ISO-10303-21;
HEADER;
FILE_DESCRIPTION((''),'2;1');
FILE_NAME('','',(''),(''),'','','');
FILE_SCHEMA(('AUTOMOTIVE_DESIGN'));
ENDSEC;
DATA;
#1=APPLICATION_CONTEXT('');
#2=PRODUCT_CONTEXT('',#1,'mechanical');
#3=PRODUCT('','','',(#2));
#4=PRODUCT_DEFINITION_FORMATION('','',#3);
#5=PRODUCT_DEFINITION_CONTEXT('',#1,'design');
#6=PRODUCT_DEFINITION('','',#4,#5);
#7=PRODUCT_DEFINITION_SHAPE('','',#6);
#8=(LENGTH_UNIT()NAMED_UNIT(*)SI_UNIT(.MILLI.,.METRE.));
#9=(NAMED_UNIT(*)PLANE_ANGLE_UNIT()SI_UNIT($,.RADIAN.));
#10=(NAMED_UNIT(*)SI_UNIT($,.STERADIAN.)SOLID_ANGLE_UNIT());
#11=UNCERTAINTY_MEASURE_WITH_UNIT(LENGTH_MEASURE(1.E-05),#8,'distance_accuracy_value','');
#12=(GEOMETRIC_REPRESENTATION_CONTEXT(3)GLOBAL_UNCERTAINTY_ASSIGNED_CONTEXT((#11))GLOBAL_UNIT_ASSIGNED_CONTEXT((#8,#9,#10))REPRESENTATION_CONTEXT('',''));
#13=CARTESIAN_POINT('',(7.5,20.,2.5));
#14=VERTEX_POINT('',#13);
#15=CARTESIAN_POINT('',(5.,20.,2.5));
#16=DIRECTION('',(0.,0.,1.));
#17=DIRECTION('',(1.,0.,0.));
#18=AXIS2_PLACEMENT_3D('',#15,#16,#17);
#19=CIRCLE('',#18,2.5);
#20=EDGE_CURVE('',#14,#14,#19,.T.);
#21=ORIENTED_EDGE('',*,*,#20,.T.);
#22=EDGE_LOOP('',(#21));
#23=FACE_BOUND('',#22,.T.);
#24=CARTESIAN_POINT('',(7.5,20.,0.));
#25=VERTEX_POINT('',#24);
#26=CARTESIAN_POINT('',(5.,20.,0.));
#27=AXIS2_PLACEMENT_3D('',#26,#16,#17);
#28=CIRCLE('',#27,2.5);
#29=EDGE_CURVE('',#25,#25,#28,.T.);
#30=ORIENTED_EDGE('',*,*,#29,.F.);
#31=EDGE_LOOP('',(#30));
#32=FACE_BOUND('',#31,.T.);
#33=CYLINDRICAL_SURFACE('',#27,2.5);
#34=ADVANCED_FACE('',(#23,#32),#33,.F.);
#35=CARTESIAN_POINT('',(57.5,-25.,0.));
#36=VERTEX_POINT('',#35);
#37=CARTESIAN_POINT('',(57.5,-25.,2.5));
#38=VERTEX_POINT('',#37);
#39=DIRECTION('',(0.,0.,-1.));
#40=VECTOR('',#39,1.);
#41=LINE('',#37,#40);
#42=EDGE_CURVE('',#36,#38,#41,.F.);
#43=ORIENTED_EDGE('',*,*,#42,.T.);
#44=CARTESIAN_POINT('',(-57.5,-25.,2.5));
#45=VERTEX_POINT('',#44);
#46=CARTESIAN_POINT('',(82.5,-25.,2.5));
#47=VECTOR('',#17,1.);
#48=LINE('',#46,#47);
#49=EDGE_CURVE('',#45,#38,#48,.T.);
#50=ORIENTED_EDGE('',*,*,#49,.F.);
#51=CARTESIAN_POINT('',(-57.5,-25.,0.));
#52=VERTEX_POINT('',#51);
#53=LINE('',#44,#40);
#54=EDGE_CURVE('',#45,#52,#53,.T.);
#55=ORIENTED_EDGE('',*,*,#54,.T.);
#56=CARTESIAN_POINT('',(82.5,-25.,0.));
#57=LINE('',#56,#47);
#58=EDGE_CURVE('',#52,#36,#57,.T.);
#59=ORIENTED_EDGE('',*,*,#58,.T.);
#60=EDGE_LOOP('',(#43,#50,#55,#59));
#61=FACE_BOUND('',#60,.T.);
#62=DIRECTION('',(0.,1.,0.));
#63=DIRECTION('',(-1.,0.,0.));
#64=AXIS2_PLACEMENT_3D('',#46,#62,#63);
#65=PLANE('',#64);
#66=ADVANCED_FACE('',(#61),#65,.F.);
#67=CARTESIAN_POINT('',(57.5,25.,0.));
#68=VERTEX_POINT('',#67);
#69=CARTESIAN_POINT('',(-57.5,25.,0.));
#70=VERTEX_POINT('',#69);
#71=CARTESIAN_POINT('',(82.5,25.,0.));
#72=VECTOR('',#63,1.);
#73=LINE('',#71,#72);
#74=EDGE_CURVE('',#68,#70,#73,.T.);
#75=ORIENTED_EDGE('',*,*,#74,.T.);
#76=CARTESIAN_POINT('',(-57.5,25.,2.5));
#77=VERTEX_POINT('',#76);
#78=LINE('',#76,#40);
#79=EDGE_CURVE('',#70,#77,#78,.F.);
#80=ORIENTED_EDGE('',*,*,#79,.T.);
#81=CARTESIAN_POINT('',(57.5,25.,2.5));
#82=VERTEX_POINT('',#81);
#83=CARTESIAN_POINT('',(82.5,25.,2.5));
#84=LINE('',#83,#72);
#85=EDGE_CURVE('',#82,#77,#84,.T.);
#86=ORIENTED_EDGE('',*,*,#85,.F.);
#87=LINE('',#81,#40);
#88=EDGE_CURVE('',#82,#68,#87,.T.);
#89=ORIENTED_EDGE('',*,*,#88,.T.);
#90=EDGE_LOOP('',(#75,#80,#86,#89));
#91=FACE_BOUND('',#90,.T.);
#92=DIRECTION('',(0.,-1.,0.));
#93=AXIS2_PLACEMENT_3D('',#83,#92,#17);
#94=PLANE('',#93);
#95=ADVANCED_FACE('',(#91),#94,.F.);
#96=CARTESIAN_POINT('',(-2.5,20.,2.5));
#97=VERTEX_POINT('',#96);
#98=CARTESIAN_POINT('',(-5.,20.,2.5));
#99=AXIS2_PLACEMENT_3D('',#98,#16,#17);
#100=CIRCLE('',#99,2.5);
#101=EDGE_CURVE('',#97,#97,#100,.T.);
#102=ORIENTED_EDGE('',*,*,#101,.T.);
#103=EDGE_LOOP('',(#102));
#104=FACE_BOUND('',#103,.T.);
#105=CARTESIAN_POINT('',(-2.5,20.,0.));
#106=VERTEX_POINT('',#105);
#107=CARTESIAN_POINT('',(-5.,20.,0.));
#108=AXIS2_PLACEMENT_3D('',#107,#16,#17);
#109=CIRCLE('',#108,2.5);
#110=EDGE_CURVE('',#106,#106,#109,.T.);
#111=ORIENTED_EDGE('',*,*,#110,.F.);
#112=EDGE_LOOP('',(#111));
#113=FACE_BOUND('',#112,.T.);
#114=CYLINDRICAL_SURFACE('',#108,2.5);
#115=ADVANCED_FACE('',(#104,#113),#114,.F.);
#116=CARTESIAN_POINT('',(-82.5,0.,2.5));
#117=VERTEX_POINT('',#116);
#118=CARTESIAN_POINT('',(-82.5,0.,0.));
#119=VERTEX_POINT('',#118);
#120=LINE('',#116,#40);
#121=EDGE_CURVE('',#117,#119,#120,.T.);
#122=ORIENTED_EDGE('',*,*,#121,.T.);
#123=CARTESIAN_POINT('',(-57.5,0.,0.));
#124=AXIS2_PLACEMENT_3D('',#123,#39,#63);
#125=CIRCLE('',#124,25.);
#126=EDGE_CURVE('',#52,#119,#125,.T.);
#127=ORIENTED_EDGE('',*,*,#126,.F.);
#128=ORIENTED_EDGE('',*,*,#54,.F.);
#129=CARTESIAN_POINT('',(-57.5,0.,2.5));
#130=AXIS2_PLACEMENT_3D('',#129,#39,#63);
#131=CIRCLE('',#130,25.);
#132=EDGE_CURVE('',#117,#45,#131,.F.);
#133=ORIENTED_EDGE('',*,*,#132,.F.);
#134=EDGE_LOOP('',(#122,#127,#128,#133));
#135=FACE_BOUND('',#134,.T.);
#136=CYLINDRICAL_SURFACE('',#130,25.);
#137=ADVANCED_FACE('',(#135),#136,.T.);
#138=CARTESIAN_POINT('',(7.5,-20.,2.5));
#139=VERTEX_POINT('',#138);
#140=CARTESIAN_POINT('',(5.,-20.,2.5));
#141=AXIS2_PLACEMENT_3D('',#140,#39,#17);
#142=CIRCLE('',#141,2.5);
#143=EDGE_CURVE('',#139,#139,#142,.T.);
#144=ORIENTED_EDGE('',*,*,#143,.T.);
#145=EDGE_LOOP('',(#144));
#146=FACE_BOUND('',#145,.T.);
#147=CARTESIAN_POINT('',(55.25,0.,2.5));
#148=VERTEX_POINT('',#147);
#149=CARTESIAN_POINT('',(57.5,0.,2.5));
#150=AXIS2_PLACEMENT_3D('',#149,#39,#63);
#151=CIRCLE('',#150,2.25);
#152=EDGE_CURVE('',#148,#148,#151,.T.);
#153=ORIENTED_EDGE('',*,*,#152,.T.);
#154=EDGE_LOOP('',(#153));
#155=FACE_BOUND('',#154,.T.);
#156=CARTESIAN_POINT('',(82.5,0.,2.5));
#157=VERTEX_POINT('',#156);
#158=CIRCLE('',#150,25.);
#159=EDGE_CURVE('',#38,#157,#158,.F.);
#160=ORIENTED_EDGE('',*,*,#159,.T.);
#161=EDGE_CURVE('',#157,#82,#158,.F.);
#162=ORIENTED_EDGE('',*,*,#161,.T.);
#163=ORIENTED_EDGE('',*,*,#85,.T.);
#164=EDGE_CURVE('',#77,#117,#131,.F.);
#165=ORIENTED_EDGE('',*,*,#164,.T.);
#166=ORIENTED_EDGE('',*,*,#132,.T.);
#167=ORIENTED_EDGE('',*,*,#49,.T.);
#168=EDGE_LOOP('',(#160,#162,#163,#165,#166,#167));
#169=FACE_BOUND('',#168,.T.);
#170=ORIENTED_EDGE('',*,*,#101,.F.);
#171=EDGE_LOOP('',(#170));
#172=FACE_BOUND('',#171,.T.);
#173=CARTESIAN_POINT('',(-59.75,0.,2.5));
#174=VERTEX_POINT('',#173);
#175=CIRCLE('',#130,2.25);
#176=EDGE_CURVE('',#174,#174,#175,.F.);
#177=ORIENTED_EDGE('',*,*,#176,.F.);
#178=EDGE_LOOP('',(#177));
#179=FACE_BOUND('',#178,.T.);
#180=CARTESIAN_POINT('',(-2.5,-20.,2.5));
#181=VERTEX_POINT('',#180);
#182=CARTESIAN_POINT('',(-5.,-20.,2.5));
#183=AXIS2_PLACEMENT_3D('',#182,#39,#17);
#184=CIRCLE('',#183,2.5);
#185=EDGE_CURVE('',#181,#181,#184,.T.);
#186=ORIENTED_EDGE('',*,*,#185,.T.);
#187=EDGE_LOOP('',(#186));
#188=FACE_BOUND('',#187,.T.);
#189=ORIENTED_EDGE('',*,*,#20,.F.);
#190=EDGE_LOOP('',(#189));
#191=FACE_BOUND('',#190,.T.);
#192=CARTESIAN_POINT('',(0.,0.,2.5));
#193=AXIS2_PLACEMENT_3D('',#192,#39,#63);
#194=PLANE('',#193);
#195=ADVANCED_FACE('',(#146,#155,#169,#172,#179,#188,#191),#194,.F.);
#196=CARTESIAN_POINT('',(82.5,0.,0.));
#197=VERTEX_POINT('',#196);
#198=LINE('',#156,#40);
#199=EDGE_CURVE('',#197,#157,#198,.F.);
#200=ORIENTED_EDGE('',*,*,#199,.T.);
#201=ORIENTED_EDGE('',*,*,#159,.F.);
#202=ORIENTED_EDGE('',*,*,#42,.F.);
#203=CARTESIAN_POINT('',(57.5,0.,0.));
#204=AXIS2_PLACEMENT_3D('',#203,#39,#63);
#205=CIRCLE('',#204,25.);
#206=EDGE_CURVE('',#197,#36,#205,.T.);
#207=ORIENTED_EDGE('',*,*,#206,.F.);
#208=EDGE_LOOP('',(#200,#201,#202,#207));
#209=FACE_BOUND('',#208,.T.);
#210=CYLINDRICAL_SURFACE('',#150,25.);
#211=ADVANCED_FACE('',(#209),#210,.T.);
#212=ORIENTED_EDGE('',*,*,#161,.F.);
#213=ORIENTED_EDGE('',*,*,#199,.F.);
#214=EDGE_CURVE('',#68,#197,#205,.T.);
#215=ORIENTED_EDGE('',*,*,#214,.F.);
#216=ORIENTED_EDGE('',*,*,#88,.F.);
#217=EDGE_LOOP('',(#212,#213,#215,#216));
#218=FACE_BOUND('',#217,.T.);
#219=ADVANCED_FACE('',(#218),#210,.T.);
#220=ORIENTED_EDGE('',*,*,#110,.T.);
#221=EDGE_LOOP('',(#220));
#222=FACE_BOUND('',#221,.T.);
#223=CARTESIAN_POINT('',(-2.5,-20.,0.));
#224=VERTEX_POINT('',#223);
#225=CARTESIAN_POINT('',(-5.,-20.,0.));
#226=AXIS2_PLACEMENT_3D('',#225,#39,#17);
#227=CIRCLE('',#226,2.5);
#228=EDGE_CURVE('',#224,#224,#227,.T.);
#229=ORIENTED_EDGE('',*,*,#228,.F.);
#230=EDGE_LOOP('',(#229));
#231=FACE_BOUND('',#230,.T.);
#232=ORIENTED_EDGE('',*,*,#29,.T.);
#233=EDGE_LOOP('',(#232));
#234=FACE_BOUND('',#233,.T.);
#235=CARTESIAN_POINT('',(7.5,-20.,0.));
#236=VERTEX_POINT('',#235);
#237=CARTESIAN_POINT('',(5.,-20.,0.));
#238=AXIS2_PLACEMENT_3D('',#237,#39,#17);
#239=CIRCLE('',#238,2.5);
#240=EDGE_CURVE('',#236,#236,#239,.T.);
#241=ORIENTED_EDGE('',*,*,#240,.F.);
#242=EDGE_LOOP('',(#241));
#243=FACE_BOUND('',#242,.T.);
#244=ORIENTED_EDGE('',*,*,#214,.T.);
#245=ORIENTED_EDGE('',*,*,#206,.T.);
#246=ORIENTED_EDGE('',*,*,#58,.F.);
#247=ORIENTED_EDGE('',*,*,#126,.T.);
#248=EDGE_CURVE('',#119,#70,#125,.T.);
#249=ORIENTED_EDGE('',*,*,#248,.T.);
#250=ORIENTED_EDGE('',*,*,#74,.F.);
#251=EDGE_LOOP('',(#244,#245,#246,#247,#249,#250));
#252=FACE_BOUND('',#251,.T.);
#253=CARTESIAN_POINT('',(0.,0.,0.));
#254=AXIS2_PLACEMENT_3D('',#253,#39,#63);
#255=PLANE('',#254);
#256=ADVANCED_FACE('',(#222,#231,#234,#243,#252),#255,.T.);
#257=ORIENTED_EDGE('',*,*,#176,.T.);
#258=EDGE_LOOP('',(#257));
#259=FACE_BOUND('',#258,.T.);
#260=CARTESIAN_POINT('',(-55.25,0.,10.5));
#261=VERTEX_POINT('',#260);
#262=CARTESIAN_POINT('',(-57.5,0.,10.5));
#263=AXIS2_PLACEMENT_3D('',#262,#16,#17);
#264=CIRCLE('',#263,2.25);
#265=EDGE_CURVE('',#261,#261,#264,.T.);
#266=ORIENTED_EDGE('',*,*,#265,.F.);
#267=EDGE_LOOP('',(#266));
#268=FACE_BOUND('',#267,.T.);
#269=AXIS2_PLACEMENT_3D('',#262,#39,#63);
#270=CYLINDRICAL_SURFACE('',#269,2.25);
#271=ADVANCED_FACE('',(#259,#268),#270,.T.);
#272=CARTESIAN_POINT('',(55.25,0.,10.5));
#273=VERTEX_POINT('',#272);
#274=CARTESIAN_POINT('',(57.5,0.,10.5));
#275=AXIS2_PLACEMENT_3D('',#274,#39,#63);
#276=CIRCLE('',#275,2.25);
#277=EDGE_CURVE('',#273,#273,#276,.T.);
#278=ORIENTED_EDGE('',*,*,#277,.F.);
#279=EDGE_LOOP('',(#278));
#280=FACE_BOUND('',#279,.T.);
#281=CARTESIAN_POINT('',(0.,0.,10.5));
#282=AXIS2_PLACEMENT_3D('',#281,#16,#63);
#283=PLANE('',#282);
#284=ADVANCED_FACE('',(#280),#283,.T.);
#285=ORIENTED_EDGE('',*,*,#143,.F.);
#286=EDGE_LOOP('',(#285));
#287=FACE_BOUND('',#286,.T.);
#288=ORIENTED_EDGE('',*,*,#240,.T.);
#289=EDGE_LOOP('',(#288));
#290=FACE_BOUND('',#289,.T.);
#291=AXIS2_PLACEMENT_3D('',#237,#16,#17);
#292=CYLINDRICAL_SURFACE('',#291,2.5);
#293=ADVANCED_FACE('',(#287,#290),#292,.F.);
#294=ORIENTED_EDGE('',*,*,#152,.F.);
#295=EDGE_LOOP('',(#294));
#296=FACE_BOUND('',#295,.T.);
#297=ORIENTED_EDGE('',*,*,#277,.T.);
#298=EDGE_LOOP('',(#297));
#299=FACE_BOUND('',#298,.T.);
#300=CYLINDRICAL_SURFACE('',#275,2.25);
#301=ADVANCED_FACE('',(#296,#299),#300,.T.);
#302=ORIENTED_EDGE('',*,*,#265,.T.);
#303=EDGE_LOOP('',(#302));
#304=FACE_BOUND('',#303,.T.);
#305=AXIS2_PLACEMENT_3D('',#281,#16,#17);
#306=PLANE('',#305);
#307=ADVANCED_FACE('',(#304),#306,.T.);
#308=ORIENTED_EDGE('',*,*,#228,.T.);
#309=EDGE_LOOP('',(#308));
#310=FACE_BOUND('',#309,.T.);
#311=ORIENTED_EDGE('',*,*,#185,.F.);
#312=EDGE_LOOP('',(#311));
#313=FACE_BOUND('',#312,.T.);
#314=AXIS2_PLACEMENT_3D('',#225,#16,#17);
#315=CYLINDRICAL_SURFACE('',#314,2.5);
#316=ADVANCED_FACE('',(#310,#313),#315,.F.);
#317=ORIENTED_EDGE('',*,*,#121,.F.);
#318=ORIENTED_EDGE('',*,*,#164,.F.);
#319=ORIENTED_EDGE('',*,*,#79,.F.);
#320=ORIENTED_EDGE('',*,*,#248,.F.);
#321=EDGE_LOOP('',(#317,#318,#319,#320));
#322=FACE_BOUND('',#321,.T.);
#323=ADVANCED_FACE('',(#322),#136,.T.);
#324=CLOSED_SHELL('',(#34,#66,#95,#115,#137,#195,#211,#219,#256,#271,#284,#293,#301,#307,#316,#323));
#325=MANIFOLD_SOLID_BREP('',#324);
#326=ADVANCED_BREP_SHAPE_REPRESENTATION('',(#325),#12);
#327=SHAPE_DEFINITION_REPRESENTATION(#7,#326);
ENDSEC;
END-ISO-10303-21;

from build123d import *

# Parameters (mm, degrees)
SKETCH1_W           = 165
SKETCH1_H           = 50
BOSS_EXTRUDE1_DEPTH = 2.5
FILLET1_R           = 25
SKETCH2_R           = 2.5
CUT_EXTRUDE1_DEPTH  = 2.5
SKETCH4_R           = 2.25
BOSS_EXTRUDE2_DEPTH = 8


with BuildPart() as part:
    # Sketch1 → Boss-Extrude1 (new body)
    with BuildSketch(Plane.XY):
        Rectangle(SKETCH1_W, SKETCH1_H)
    extrude(amount=BOSS_EXTRUDE1_DEPTH)

    # Fillet1
    fillet1_edges = [part.edges().sort_by_distance(p)[0] for p in [
        (-82.5, -25, 1.25),
        (-82.5, 25, 1.25),
        (82.5, -25, 1.25),
        (82.5, 25, 1.25),
    ]]
    fillet(fillet1_edges, radius=FILLET1_R - 0.0001)  # a hair under: the kernel refuses the full size

    # Sketch2 → Cut-Extrude1 (cut)
    with BuildSketch(Plane.XY.offset(2.5)):
        with Locations((-5, 20)):
            Circle(SKETCH2_R)
        with Locations((5, 20)):
            Circle(SKETCH2_R)
    cut_extrude1 = extrude(amount=-CUT_EXTRUDE1_DEPTH, mode=Mode.SUBTRACT)

    # Mirror1: Cut-Extrude1 across plane
    add(cut_extrude1.mirror(Plane.ZX), mode=Mode.SUBTRACT)

    # Sketch4 → Boss-Extrude2 (add)
    with BuildSketch(Plane.XY.offset(2.5)):
        with Locations(Location((-57.5, 0, 0), (0, 0, 180))):
            Circle(SKETCH4_R)
    boss_extrude2 = extrude(amount=BOSS_EXTRUDE2_DEPTH)

    # Mirror3: Boss-Extrude2 across plane
    add(boss_extrude2.mirror(Plane(origin=(0, 0, 0), x_dir=(0, 0, 1), z_dir=(1, 0, 0))))


solid = part.part
